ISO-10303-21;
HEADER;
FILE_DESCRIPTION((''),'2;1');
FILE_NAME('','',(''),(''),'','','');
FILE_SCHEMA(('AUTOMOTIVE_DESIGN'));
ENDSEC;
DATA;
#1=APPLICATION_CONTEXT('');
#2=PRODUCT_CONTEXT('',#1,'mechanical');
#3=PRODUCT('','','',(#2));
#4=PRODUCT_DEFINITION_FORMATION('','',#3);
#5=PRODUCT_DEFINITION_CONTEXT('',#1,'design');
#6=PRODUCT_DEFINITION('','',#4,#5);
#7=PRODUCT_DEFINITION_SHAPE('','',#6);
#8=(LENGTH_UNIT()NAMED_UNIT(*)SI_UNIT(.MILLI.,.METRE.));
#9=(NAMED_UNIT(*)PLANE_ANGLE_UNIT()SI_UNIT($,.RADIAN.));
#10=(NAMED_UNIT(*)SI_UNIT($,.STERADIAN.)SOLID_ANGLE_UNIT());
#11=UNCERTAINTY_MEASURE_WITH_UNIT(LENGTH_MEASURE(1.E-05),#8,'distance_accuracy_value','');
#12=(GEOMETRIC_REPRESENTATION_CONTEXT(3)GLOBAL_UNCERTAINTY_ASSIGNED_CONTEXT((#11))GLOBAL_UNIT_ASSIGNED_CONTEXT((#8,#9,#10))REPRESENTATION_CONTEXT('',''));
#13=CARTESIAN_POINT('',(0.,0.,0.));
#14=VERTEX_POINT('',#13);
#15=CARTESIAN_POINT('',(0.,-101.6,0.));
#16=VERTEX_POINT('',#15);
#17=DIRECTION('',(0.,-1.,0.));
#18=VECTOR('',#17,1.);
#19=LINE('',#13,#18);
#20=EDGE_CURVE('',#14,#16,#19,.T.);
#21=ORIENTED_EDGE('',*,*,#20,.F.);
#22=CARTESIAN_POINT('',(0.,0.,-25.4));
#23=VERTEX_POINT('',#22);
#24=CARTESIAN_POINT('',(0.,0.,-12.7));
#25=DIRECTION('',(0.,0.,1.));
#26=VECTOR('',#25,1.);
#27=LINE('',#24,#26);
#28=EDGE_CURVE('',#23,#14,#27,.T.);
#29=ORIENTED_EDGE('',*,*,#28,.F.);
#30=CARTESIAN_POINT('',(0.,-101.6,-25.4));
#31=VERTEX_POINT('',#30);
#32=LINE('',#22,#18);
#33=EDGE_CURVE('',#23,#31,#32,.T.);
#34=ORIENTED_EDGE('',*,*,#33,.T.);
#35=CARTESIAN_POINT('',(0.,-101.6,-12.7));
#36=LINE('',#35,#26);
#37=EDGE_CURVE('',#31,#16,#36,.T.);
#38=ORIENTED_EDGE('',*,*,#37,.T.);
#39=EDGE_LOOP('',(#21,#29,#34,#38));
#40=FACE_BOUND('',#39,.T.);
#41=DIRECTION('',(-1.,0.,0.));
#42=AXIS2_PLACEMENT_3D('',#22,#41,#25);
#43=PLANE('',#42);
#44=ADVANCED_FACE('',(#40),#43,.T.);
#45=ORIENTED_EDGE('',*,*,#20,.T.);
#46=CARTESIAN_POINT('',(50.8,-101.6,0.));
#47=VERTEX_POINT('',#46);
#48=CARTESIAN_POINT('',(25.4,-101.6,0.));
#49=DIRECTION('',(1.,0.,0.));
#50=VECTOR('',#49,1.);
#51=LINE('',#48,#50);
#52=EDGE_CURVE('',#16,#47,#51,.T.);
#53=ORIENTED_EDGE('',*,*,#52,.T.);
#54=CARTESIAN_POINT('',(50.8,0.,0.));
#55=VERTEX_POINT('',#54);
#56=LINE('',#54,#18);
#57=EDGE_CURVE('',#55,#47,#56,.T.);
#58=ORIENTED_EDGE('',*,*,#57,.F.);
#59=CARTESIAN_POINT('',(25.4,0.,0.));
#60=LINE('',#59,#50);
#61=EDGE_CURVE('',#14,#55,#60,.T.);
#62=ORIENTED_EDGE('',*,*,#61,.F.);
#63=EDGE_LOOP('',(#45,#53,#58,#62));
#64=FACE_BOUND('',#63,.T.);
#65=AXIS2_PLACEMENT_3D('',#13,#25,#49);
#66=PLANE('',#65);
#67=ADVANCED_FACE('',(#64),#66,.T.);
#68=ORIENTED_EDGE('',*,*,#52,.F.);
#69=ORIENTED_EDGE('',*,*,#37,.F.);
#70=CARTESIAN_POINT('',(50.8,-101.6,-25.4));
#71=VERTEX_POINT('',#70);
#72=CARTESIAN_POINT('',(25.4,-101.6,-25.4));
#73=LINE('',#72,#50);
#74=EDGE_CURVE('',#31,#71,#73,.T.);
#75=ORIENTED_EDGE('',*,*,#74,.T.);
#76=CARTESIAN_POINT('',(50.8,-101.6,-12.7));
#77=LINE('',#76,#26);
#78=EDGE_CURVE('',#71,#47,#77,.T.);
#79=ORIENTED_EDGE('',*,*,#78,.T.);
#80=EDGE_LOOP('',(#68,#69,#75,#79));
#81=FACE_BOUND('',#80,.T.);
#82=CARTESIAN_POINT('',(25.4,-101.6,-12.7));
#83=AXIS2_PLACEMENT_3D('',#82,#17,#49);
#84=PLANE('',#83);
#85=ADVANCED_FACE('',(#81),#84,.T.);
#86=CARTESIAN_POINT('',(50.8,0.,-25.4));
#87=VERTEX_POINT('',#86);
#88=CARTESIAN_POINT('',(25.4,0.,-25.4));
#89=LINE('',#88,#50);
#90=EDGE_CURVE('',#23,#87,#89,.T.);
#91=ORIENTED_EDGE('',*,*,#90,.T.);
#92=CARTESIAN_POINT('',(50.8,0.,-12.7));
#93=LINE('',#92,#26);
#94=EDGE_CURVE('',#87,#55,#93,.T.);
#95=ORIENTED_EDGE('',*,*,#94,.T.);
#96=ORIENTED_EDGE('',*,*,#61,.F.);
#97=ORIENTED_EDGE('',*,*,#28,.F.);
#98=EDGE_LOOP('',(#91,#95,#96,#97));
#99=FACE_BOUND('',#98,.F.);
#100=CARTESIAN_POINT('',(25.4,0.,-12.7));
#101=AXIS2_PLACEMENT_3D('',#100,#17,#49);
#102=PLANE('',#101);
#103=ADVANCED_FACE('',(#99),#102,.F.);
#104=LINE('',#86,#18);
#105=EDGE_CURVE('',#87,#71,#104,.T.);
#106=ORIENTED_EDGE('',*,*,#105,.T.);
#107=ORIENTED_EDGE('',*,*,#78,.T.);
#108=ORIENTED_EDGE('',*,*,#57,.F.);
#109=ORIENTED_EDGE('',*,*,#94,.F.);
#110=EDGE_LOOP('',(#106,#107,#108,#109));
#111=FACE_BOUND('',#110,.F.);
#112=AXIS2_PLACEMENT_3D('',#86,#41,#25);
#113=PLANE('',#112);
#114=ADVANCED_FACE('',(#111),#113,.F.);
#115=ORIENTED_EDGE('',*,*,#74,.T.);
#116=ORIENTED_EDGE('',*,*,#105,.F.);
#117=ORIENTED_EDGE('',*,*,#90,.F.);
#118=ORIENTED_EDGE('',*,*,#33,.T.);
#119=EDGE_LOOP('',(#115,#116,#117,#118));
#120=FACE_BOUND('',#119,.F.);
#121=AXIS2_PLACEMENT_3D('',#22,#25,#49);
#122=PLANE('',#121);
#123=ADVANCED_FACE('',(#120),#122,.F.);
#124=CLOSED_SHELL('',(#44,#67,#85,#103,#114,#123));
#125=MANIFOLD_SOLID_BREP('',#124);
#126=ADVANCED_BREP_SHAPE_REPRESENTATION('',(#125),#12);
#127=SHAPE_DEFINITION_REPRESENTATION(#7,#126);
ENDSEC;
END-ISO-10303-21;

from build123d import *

# Parameters (mm, degrees)
F0_W     = 50.8
F0_H     = 25.4
F1_DEPTH = 101.6
F2_DEPTH = 130


# Not quite as in the source:
# - an extrude ends at something that could not be found from the text; its depth is read off the source's solid


with BuildPart() as f1:
    # F0 (on Front) → F1 (new body)
    with BuildSketch(Plane.XZ):
        with Locations((25.4, -12.7)):
            Rectangle(F0_W, F0_H)
    extrude(amount=F1_DEPTH)

    # F2 (cut, through all): a face of the model
    f2_faces = [f1.faces().sort_by_distance(p)[0] for p in [
        (25.4, -50.8, -25.4),
    ]]
    extrude(f2_faces, amount=F2_DEPTH, mode=Mode.SUBTRACT)


solid = f1.part
